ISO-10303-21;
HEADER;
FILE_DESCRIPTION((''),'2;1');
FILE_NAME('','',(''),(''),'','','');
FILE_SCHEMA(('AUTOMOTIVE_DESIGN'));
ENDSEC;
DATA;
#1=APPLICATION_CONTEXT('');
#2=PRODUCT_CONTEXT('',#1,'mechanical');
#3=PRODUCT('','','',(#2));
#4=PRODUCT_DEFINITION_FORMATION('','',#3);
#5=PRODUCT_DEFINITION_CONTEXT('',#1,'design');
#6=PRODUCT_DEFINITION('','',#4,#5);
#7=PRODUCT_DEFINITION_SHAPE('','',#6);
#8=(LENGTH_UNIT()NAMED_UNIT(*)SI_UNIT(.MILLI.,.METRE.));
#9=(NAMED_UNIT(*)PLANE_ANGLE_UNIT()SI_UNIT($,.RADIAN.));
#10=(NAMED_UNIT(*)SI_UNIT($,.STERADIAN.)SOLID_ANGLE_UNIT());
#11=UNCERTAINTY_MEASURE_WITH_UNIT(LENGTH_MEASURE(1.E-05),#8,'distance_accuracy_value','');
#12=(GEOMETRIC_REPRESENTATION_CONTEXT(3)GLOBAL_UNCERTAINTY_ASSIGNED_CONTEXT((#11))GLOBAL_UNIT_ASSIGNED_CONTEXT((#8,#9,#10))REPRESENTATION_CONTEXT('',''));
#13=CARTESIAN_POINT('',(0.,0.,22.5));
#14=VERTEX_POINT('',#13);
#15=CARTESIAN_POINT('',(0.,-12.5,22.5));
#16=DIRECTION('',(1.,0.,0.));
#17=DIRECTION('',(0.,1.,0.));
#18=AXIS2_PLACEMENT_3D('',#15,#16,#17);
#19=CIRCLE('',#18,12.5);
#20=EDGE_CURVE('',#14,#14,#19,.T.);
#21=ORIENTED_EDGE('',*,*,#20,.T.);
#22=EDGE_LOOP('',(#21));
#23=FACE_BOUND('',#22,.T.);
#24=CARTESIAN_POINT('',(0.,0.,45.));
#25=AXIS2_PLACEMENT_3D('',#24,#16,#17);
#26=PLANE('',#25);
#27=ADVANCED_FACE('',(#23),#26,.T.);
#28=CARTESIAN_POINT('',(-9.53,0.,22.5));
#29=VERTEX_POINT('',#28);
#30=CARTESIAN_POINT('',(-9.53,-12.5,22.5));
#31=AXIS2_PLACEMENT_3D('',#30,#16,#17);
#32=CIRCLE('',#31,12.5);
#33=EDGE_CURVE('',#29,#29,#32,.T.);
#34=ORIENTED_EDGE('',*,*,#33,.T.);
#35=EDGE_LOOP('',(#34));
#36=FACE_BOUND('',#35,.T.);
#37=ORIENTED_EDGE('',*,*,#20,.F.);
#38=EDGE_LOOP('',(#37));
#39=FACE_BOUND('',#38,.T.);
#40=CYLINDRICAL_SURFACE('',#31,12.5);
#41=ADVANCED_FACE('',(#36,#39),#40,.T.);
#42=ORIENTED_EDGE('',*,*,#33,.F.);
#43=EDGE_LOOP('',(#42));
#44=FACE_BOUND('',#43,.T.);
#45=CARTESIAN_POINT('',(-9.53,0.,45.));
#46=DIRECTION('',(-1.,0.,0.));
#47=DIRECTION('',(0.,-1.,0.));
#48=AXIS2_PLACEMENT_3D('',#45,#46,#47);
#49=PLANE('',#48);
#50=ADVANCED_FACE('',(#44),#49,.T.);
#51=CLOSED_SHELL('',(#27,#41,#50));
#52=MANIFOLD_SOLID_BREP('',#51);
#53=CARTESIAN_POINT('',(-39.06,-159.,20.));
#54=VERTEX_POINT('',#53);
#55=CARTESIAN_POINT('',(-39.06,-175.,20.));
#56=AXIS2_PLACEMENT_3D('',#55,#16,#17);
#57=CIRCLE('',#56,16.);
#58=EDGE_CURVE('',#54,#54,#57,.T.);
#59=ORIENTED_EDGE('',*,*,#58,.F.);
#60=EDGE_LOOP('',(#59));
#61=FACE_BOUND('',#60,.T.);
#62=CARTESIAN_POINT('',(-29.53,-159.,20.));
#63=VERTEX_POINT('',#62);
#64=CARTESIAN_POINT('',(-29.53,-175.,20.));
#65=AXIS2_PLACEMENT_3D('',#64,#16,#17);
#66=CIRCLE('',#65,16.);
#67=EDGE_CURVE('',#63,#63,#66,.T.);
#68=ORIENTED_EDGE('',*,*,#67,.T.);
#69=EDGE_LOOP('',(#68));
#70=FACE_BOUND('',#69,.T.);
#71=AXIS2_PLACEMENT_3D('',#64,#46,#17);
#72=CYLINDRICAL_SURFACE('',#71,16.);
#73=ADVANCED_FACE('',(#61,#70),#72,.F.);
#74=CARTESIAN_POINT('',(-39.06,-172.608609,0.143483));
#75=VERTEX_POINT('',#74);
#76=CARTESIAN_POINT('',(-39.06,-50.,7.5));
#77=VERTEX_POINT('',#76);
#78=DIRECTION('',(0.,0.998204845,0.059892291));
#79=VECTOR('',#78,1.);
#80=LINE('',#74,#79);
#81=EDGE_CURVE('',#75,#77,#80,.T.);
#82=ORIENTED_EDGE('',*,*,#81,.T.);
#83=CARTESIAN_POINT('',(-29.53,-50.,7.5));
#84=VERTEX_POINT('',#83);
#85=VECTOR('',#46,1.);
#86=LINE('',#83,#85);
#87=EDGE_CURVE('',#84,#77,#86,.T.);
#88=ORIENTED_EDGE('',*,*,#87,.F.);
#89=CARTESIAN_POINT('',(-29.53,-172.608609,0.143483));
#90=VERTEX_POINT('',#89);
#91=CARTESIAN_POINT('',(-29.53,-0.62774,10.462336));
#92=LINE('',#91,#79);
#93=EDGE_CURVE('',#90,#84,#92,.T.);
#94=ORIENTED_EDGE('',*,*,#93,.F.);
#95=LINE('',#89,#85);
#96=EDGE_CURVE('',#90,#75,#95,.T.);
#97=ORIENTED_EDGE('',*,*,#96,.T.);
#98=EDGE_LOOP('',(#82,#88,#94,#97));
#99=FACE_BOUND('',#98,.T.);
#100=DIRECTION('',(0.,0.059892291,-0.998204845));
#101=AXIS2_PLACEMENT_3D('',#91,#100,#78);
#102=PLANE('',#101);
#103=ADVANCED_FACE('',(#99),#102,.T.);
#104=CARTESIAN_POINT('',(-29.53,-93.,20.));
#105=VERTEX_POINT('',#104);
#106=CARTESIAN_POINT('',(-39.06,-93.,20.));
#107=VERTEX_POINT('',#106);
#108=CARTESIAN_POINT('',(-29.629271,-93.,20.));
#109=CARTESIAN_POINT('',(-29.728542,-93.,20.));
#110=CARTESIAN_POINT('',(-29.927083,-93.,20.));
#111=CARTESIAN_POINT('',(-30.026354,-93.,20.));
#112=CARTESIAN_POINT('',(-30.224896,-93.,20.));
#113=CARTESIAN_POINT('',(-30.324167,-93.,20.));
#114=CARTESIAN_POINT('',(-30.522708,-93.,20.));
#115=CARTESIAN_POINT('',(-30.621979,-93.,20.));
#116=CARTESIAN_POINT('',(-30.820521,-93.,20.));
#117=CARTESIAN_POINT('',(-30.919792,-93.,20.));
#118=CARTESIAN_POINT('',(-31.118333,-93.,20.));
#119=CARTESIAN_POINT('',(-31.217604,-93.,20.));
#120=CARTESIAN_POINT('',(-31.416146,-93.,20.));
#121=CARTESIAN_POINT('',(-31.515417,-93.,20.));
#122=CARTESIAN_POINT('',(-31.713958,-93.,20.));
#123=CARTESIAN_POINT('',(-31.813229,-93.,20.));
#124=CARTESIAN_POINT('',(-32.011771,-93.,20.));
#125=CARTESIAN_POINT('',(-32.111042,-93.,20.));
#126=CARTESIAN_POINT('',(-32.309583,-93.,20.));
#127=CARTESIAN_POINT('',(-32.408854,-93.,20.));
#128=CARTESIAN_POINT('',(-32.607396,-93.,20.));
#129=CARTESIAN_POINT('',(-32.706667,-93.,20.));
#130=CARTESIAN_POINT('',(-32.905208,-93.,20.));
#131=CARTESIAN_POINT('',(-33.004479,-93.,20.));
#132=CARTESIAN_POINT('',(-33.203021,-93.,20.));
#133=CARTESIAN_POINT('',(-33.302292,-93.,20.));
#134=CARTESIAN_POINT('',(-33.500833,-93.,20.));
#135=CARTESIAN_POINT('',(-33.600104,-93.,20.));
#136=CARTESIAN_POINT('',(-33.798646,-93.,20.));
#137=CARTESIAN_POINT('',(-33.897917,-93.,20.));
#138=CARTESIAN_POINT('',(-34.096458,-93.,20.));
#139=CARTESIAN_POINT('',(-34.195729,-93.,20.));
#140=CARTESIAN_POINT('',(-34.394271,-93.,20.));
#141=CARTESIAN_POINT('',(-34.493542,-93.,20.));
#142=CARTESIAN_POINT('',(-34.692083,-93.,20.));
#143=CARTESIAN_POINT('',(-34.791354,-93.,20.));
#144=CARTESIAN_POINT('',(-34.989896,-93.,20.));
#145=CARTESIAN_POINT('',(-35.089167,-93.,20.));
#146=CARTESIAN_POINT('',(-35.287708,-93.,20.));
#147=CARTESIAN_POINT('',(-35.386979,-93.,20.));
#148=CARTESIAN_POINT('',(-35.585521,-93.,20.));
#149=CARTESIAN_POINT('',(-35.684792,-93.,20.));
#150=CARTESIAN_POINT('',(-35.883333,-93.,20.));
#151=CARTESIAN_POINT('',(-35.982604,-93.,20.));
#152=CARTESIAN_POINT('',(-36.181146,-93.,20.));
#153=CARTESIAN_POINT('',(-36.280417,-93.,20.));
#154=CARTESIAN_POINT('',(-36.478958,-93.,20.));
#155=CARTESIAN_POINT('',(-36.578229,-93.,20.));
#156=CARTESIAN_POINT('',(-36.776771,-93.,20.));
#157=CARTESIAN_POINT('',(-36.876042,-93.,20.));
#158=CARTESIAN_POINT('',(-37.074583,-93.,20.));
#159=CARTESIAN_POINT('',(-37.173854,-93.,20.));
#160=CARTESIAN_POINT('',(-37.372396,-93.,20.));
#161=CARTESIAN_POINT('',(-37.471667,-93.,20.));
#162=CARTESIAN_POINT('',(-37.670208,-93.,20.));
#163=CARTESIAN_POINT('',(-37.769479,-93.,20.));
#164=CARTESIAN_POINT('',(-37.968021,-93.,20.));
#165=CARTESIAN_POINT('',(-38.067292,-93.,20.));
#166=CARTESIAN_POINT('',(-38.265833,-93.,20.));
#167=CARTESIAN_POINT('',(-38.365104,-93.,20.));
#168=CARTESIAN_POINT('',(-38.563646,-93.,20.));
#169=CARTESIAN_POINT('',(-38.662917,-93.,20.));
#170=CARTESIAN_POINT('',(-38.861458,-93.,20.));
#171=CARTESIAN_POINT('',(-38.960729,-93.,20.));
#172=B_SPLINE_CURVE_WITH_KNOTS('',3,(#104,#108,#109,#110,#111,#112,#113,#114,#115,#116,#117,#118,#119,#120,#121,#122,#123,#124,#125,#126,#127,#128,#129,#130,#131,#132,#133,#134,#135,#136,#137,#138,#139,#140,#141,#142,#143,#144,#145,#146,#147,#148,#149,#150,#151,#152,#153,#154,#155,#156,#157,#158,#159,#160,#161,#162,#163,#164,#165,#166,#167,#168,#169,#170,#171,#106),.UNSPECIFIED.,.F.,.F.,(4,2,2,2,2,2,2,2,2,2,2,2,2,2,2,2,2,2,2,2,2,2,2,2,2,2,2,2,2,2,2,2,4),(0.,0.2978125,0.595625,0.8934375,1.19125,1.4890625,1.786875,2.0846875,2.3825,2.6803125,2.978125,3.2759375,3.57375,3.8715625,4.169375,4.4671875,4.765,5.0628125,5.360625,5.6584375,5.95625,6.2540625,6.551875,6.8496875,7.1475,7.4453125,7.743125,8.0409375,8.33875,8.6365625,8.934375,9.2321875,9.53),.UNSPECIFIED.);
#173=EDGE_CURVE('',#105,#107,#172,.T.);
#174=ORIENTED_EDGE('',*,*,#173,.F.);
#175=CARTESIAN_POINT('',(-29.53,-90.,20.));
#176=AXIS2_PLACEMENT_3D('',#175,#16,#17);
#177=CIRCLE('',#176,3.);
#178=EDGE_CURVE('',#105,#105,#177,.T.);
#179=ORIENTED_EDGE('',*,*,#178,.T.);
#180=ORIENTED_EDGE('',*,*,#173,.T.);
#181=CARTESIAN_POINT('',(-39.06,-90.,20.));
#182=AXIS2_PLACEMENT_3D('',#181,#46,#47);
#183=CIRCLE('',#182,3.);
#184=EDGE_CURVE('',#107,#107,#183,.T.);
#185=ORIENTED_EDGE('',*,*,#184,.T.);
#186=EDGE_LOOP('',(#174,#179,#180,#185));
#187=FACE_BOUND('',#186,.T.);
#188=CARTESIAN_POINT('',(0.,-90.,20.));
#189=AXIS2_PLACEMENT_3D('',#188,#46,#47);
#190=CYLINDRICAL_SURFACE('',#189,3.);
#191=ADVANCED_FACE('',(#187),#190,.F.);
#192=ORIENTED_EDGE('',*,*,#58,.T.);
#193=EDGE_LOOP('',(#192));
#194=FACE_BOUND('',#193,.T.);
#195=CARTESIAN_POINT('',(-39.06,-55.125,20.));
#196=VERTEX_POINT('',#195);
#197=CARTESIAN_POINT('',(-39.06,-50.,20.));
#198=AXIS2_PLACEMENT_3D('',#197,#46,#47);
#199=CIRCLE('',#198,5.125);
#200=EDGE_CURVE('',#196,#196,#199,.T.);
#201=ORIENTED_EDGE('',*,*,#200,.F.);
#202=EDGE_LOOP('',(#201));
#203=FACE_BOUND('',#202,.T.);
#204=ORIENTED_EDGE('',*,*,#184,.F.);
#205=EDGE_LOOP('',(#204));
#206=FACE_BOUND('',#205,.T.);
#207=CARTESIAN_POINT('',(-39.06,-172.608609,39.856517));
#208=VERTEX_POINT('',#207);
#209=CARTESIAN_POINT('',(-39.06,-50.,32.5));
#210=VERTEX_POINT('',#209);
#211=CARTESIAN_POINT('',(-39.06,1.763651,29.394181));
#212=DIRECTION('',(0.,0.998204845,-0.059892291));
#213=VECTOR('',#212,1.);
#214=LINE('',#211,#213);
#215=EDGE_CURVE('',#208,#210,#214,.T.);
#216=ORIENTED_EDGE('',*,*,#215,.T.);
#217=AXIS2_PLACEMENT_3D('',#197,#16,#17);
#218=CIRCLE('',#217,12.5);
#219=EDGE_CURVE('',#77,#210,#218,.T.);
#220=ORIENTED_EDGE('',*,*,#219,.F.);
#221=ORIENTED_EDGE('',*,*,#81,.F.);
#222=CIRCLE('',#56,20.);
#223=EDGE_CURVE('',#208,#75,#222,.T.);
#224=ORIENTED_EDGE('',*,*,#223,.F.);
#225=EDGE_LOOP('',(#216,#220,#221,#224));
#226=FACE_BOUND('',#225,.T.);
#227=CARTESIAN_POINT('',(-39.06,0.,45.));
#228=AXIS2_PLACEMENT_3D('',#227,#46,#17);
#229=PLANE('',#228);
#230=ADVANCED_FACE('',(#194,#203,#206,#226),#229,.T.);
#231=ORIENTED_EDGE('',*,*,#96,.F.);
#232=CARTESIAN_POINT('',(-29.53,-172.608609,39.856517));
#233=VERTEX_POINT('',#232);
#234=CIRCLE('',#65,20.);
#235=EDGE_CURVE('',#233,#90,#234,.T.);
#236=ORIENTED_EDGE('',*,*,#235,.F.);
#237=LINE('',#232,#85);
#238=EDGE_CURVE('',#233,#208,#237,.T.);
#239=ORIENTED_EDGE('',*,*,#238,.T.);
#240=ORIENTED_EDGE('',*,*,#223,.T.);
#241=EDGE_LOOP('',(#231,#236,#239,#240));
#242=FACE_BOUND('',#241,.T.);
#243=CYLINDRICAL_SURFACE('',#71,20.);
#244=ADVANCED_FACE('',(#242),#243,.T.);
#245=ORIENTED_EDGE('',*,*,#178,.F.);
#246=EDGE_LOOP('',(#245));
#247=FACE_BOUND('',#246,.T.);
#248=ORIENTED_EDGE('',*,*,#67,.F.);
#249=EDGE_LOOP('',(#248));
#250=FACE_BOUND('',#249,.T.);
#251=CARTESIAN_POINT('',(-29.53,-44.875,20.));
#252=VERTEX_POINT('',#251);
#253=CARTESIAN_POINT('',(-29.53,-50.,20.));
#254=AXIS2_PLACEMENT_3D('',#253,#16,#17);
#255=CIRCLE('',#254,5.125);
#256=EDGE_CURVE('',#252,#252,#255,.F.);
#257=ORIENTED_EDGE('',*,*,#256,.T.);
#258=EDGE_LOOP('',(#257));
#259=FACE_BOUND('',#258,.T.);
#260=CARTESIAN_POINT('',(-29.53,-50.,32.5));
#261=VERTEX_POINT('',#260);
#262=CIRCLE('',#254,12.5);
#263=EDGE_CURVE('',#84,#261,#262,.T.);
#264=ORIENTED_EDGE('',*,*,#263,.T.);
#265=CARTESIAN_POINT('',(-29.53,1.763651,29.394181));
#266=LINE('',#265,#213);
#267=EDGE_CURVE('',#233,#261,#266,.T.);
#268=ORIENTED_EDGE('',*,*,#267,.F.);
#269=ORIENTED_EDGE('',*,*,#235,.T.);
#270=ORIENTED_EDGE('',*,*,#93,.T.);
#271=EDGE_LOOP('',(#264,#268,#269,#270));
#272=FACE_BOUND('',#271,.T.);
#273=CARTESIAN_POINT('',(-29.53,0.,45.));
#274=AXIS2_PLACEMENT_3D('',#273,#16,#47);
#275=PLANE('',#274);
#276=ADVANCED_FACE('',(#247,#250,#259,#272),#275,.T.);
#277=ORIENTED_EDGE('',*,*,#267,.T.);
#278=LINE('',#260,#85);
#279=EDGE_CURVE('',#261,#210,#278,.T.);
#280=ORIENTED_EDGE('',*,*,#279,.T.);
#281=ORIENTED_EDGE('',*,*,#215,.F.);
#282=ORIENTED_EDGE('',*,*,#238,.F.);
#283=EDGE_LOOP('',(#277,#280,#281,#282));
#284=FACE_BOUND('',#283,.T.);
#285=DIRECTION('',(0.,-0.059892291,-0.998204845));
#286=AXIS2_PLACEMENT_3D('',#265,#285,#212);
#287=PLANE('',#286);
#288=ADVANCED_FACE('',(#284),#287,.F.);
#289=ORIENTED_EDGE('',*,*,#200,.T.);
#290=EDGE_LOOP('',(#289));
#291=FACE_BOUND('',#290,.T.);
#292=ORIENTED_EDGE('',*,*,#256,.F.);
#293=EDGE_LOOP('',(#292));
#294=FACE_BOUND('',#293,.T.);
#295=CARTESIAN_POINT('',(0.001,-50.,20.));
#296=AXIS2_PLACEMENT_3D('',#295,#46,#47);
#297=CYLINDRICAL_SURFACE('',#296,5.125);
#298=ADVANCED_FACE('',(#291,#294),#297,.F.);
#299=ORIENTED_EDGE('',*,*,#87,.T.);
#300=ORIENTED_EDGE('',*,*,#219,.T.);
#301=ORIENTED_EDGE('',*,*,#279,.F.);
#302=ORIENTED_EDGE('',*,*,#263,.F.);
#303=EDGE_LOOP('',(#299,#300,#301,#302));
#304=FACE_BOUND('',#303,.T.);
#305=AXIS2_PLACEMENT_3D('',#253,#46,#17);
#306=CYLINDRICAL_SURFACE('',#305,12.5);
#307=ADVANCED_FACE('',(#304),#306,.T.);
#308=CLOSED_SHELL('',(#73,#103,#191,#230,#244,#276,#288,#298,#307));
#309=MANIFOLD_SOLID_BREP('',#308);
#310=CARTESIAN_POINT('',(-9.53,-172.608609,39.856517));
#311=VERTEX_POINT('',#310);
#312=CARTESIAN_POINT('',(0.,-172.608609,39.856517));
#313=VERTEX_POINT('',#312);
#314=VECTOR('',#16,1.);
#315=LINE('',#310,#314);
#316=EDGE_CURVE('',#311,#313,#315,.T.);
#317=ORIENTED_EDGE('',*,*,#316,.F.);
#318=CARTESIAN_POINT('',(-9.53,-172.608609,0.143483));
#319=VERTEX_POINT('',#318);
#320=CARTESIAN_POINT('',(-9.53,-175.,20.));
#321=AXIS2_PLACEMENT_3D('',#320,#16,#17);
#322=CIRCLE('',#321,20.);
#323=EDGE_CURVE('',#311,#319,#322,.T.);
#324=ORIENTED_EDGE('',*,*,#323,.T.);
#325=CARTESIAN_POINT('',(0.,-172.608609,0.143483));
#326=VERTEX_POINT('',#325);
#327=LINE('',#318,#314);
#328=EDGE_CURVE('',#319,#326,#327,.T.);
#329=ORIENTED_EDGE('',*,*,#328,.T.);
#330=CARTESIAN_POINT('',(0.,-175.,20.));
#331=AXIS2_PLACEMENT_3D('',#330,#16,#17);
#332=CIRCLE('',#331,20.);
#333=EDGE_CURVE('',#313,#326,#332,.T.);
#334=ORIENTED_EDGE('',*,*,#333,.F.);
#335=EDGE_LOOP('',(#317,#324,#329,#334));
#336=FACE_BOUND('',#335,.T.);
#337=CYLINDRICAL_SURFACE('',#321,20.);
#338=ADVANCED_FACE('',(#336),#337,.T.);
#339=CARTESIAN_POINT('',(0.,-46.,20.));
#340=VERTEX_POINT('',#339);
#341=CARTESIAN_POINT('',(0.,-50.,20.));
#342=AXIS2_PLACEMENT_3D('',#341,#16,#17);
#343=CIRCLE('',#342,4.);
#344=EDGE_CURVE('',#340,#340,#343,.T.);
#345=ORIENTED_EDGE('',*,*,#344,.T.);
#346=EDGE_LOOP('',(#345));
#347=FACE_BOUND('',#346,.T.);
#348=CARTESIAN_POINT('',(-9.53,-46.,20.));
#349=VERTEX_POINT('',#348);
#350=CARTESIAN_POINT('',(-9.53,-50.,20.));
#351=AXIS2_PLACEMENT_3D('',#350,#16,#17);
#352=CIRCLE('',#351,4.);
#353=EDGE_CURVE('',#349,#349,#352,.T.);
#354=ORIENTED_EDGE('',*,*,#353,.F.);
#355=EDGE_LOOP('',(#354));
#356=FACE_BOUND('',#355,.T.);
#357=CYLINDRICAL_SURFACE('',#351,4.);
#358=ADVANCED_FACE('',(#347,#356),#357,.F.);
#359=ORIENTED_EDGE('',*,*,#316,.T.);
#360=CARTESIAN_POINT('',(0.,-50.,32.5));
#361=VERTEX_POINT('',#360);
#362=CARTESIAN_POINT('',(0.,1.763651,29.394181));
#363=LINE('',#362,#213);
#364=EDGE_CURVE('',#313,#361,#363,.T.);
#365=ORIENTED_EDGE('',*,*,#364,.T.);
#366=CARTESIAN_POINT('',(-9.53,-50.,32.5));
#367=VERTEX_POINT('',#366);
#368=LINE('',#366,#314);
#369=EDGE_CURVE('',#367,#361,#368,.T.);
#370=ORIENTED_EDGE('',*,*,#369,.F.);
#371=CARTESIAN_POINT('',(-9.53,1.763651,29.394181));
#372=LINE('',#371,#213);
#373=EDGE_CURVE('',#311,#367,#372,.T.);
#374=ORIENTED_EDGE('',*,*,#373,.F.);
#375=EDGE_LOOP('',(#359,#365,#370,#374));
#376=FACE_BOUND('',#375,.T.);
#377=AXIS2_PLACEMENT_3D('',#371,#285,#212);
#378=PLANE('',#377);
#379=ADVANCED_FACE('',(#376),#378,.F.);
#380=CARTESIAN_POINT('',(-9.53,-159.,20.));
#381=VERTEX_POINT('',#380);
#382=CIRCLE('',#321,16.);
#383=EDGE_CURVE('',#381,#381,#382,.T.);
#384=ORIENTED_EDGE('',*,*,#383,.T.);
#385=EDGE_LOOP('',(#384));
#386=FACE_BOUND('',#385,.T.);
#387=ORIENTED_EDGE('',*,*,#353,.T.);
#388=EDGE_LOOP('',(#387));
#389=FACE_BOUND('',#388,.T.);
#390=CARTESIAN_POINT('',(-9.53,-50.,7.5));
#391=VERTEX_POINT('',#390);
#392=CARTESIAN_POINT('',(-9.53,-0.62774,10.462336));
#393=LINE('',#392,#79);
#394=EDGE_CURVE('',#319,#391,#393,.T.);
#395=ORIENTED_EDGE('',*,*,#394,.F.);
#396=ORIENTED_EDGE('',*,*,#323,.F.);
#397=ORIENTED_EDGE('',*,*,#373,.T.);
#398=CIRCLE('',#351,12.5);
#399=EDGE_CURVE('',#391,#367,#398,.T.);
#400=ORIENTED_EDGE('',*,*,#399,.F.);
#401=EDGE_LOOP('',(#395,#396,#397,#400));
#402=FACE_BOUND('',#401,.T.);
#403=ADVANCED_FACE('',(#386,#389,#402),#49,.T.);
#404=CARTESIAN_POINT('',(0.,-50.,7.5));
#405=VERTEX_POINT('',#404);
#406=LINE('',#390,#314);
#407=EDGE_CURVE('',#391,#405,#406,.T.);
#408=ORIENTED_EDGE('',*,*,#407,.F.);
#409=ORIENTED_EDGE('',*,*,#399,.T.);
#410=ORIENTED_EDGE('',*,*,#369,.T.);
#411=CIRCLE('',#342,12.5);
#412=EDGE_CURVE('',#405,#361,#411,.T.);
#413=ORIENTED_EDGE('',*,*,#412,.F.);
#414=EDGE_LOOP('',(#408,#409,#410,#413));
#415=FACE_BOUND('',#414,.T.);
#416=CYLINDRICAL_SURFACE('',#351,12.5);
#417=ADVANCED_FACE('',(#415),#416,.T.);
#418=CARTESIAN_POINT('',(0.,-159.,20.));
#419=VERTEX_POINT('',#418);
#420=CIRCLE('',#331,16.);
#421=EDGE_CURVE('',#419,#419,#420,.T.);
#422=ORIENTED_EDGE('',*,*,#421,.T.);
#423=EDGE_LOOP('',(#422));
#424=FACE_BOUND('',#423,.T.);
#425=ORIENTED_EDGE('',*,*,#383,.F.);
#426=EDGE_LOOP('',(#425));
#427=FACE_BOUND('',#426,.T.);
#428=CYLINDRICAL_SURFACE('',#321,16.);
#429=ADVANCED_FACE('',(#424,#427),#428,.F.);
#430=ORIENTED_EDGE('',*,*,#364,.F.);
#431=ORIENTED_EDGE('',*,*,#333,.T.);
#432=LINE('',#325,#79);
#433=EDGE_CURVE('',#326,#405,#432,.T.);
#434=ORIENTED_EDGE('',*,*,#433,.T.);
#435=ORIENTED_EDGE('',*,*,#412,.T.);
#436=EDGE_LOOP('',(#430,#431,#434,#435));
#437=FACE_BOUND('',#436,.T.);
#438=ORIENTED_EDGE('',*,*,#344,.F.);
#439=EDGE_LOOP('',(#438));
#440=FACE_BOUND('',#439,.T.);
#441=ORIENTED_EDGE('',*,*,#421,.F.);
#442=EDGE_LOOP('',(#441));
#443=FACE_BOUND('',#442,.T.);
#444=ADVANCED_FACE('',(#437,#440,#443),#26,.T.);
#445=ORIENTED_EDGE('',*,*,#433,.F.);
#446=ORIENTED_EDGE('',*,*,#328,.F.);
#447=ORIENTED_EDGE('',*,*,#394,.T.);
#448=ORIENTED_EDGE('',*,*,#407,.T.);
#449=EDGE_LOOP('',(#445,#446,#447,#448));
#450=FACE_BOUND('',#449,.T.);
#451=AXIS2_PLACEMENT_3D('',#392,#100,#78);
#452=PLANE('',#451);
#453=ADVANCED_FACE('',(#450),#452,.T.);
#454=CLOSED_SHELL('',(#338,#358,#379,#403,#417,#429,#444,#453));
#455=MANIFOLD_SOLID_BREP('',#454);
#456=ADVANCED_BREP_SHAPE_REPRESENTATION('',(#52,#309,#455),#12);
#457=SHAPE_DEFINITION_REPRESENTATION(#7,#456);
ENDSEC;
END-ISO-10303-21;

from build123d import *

# Parameters (mm, degrees)
SALIENTE_EXTRUIR1_DEPTH     = 45
CORTAR_EXTRUIR1_START       = -9.53
CORTAR_EXTRUIR1_OUTLINE_R   = 16
CORTAR_EXTRUIR1_OUTLINE_R_2 = 4
CORTAR_EXTRUIR1_DEPTH       = 9.53
CORTAR_EXTRUIR1_2_OUTLINE_R = 12.5
CORTAR_EXTRUIR1_2_DEPTH     = 9.53
CORTAR_EXTRUIR2_DEPTH       = 203.856312695
CORTAR_EXTRUIR2_DEPTH_BACK  = 203.856312695
CROQUIS3_R                  = 3
CROQUIS6_R                  = 4
SALIENTE_EXTRUIR2_DEPTH     = 9.53
CROQUIS7_R                  = 5.125
CORTAR_EXTRUIR3_DEPTH       = 9.53


# Read off the part's stored shape, not the designer's step: Cortar-Extruir1
with BuildPart() as part:
    # Croquis1 → Saliente-Extruir1 (new body)
    with BuildSketch(Plane.XY):
        Polygon((0, -195), (-9.53, -195), (-9.53, -150.957826949), (-9.53, -125.957826949), (-9.53, -37.272336593), (-9.53, -22.648156901), (-9.53, 0), (0, 0), (0, -22.648156901), (0, -37.272336593), (0, -126.527583158), (0, -153), align=None)
    extrude(amount=SALIENTE_EXTRUIR1_DEPTH)

    # Cortar-Extruir1 outline → Cortar-Extruir1 (cut)
    with BuildSketch(Plane(origin=(0, 0, 0), x_dir=(0, 0, -1), z_dir=(1, 0, 0)).offset(CORTAR_EXTRUIR1_START)):
        with Locations((-20, -175)):
            Circle(CORTAR_EXTRUIR1_OUTLINE_R)
        with BuildLine():
            ThreePointArc((-20, -195), (-34.963753203, -188.269743407), (-39.85651654, -172.608609008))
            Line((-39.85651654, -172.608609008), (-32.5, -50))
            ThreePointArc((-32.5, -50), (-20, -37.5), (-7.5, -50))
            Line((-7.5, -50), (-0.14348346, -172.608609008))
            ThreePointArc((-0.14348346, -172.608609008), (-0.035903091, -173.802154186), (0, -175))
            Line((0, -175), (0, 0))
            Line((0, 0), (-45, 0))
            Line((-45, 0), (-45, -195))
            Line((-45, -195), (-20, -195))
        make_face()
        with BuildLine():
            ThreePointArc((0, -175), (-5.857864377, -189.142135624), (-20, -195))
            Line((-20, -195), (0, -195))
            Line((0, -195), (0, -175))
        make_face()
        with Locations((-20, -50)):
            Circle(CORTAR_EXTRUIR1_OUTLINE_R_2)
    extrude(amount=CORTAR_EXTRUIR1_DEPTH, mode=Mode.SUBTRACT)


with BuildPart() as body_2:
    # Cortar-Extruir1 2 outline → Cortar-Extruir1 2 (new body)
    with BuildSketch(Plane(origin=(0, 0, 0), x_dir=(0, 0, -1), z_dir=(1, 0, 0)).offset(CORTAR_EXTRUIR1_START)):
        with Locations((-22.5, -12.5)):
            Circle(CORTAR_EXTRUIR1_2_OUTLINE_R)
    extrude(amount=CORTAR_EXTRUIR1_2_DEPTH)


with BuildPart() as body_3:
    # Simetría2: mirrored copy
    add(part.part.mirror(Plane.ZY.offset(19.53)))

    # Croquis3 → Cortar-Extruir2 (cut, two sides: drawn at the far end of the back side and taken through both)
    with BuildSketch(Plane.ZY.offset(39.06).offset(-CORTAR_EXTRUIR2_DEPTH_BACK)):
        with Locations(Location((20, -90, 0), (0, 0, 270))):
            Circle(CROQUIS3_R)
    extrude(amount=CORTAR_EXTRUIR2_DEPTH + CORTAR_EXTRUIR2_DEPTH_BACK, mode=Mode.SUBTRACT)

    # Croquis6 → Saliente-Extruir2 (add)
    with BuildSketch(Plane.ZY.offset(39.06)):
        with Locations(Location((20, -50, 0), (0, 0, 90))):
            Circle(CROQUIS6_R)
    extrude(amount=-SALIENTE_EXTRUIR2_DEPTH)

    # Croquis7 → Cortar-Extruir3 (cut)
    with BuildSketch(Plane.ZY.offset(39.06)):
        with Locations(Location((20, -50, 0), (0, 0, 270))):
            Circle(CROQUIS7_R)
    extrude(amount=-CORTAR_EXTRUIR3_DEPTH, mode=Mode.SUBTRACT)


solid = Compound([part.part, body_2.part, body_3.part])
